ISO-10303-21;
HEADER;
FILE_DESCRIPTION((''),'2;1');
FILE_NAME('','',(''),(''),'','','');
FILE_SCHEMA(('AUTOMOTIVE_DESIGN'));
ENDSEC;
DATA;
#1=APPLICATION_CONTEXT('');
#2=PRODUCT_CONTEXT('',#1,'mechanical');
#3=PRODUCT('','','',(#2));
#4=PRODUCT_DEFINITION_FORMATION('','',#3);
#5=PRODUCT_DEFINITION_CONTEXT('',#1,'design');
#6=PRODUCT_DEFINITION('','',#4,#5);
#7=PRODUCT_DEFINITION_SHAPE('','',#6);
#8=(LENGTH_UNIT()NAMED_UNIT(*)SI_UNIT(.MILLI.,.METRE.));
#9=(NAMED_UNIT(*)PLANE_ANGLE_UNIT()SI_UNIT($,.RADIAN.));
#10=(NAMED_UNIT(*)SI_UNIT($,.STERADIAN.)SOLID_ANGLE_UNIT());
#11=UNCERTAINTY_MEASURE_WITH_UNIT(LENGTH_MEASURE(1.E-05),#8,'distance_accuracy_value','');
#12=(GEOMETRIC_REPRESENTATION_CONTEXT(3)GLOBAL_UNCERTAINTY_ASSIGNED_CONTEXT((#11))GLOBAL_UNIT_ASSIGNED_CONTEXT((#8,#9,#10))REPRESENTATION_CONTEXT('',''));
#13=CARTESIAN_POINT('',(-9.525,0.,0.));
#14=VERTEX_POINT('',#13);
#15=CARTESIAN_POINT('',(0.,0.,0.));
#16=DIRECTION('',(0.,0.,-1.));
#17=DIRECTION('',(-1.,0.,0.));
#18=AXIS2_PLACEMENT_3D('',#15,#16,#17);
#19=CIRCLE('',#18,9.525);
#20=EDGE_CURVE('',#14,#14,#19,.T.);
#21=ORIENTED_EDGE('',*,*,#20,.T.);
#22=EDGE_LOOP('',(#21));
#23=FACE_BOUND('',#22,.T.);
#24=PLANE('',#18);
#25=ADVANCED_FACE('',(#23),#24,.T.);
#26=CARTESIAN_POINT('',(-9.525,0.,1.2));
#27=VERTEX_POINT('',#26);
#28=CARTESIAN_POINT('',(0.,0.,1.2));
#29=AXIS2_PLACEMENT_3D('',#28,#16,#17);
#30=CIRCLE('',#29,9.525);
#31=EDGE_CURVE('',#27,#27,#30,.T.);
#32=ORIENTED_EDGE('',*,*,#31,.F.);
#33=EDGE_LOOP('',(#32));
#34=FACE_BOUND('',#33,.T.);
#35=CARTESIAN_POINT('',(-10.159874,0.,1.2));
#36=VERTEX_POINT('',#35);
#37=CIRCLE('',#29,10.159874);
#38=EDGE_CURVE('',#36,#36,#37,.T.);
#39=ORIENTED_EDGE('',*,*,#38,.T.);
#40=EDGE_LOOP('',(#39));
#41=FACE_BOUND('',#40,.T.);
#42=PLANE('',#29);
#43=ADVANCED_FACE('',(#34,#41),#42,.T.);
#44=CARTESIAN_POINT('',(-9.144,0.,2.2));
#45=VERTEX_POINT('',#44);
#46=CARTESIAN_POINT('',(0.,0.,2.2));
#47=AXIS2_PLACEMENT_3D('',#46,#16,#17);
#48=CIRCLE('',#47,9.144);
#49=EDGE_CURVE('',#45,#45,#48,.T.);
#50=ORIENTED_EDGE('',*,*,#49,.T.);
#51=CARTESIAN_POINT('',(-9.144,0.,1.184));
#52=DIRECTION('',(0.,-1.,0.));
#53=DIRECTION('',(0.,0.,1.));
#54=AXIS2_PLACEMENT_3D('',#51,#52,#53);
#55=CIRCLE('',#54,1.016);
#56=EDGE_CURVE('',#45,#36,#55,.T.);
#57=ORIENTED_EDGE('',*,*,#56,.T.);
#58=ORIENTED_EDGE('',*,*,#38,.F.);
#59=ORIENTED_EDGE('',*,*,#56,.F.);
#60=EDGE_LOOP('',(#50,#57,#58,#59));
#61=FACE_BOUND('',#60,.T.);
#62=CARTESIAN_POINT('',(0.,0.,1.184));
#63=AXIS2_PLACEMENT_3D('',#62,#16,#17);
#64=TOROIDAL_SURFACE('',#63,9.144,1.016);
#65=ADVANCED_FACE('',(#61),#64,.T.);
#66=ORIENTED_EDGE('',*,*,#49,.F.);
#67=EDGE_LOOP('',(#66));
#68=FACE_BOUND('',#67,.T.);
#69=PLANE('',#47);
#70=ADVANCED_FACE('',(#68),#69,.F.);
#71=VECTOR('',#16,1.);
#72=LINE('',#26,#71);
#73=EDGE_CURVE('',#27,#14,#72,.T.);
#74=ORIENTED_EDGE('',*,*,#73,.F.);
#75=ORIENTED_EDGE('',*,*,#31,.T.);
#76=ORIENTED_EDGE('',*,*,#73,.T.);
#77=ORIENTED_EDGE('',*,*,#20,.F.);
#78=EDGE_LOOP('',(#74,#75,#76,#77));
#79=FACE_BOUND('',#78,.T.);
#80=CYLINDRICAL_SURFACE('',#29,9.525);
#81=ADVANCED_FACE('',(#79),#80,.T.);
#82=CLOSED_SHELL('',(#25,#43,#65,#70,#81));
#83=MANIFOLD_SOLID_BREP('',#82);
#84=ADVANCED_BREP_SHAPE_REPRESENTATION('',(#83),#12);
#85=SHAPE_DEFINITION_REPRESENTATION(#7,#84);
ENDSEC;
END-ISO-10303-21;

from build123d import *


# Not quite as in the source:
# - a fillet or chamfer that OpenCascade refuses, or shapes differently, is made with other operations: its cross-section is extruded or revolved along the edge and cut away or added


with BuildPart() as f1:
    # F0 (on Front) → F1 (revolve)
    with BuildSketch(Plane.XZ):
        Polygon((-9.525, 0), (0, 0), (0, 2.2), (-10.16, 2.2), (-10.16, 1.2), (-9.525, 1.2), align=None)
    revolve(axis=Axis((0, 0, 1.1), (0, 0, -1)))

    # F2: fillet of radius 1.016 on 1 edges, made by hand

    # F2_s1 → F2_t2 (revolve, cut)
    with BuildSketch(Plane.XZ):
        with BuildLine():
            ThreePointArc((-9.144, 2.2), (-9.8624204897, 1.9024204897), (-10.16, 1.184))
            Line((-10.16, 1.184), (-10.16, 2.2))
            Line((-10.16, 2.2), (-9.144, 2.2))
        make_face()
    revolve(axis=Axis((0, 0, 2.2), (0, 0, -1)), mode=Mode.SUBTRACT)


solid = f1.part
